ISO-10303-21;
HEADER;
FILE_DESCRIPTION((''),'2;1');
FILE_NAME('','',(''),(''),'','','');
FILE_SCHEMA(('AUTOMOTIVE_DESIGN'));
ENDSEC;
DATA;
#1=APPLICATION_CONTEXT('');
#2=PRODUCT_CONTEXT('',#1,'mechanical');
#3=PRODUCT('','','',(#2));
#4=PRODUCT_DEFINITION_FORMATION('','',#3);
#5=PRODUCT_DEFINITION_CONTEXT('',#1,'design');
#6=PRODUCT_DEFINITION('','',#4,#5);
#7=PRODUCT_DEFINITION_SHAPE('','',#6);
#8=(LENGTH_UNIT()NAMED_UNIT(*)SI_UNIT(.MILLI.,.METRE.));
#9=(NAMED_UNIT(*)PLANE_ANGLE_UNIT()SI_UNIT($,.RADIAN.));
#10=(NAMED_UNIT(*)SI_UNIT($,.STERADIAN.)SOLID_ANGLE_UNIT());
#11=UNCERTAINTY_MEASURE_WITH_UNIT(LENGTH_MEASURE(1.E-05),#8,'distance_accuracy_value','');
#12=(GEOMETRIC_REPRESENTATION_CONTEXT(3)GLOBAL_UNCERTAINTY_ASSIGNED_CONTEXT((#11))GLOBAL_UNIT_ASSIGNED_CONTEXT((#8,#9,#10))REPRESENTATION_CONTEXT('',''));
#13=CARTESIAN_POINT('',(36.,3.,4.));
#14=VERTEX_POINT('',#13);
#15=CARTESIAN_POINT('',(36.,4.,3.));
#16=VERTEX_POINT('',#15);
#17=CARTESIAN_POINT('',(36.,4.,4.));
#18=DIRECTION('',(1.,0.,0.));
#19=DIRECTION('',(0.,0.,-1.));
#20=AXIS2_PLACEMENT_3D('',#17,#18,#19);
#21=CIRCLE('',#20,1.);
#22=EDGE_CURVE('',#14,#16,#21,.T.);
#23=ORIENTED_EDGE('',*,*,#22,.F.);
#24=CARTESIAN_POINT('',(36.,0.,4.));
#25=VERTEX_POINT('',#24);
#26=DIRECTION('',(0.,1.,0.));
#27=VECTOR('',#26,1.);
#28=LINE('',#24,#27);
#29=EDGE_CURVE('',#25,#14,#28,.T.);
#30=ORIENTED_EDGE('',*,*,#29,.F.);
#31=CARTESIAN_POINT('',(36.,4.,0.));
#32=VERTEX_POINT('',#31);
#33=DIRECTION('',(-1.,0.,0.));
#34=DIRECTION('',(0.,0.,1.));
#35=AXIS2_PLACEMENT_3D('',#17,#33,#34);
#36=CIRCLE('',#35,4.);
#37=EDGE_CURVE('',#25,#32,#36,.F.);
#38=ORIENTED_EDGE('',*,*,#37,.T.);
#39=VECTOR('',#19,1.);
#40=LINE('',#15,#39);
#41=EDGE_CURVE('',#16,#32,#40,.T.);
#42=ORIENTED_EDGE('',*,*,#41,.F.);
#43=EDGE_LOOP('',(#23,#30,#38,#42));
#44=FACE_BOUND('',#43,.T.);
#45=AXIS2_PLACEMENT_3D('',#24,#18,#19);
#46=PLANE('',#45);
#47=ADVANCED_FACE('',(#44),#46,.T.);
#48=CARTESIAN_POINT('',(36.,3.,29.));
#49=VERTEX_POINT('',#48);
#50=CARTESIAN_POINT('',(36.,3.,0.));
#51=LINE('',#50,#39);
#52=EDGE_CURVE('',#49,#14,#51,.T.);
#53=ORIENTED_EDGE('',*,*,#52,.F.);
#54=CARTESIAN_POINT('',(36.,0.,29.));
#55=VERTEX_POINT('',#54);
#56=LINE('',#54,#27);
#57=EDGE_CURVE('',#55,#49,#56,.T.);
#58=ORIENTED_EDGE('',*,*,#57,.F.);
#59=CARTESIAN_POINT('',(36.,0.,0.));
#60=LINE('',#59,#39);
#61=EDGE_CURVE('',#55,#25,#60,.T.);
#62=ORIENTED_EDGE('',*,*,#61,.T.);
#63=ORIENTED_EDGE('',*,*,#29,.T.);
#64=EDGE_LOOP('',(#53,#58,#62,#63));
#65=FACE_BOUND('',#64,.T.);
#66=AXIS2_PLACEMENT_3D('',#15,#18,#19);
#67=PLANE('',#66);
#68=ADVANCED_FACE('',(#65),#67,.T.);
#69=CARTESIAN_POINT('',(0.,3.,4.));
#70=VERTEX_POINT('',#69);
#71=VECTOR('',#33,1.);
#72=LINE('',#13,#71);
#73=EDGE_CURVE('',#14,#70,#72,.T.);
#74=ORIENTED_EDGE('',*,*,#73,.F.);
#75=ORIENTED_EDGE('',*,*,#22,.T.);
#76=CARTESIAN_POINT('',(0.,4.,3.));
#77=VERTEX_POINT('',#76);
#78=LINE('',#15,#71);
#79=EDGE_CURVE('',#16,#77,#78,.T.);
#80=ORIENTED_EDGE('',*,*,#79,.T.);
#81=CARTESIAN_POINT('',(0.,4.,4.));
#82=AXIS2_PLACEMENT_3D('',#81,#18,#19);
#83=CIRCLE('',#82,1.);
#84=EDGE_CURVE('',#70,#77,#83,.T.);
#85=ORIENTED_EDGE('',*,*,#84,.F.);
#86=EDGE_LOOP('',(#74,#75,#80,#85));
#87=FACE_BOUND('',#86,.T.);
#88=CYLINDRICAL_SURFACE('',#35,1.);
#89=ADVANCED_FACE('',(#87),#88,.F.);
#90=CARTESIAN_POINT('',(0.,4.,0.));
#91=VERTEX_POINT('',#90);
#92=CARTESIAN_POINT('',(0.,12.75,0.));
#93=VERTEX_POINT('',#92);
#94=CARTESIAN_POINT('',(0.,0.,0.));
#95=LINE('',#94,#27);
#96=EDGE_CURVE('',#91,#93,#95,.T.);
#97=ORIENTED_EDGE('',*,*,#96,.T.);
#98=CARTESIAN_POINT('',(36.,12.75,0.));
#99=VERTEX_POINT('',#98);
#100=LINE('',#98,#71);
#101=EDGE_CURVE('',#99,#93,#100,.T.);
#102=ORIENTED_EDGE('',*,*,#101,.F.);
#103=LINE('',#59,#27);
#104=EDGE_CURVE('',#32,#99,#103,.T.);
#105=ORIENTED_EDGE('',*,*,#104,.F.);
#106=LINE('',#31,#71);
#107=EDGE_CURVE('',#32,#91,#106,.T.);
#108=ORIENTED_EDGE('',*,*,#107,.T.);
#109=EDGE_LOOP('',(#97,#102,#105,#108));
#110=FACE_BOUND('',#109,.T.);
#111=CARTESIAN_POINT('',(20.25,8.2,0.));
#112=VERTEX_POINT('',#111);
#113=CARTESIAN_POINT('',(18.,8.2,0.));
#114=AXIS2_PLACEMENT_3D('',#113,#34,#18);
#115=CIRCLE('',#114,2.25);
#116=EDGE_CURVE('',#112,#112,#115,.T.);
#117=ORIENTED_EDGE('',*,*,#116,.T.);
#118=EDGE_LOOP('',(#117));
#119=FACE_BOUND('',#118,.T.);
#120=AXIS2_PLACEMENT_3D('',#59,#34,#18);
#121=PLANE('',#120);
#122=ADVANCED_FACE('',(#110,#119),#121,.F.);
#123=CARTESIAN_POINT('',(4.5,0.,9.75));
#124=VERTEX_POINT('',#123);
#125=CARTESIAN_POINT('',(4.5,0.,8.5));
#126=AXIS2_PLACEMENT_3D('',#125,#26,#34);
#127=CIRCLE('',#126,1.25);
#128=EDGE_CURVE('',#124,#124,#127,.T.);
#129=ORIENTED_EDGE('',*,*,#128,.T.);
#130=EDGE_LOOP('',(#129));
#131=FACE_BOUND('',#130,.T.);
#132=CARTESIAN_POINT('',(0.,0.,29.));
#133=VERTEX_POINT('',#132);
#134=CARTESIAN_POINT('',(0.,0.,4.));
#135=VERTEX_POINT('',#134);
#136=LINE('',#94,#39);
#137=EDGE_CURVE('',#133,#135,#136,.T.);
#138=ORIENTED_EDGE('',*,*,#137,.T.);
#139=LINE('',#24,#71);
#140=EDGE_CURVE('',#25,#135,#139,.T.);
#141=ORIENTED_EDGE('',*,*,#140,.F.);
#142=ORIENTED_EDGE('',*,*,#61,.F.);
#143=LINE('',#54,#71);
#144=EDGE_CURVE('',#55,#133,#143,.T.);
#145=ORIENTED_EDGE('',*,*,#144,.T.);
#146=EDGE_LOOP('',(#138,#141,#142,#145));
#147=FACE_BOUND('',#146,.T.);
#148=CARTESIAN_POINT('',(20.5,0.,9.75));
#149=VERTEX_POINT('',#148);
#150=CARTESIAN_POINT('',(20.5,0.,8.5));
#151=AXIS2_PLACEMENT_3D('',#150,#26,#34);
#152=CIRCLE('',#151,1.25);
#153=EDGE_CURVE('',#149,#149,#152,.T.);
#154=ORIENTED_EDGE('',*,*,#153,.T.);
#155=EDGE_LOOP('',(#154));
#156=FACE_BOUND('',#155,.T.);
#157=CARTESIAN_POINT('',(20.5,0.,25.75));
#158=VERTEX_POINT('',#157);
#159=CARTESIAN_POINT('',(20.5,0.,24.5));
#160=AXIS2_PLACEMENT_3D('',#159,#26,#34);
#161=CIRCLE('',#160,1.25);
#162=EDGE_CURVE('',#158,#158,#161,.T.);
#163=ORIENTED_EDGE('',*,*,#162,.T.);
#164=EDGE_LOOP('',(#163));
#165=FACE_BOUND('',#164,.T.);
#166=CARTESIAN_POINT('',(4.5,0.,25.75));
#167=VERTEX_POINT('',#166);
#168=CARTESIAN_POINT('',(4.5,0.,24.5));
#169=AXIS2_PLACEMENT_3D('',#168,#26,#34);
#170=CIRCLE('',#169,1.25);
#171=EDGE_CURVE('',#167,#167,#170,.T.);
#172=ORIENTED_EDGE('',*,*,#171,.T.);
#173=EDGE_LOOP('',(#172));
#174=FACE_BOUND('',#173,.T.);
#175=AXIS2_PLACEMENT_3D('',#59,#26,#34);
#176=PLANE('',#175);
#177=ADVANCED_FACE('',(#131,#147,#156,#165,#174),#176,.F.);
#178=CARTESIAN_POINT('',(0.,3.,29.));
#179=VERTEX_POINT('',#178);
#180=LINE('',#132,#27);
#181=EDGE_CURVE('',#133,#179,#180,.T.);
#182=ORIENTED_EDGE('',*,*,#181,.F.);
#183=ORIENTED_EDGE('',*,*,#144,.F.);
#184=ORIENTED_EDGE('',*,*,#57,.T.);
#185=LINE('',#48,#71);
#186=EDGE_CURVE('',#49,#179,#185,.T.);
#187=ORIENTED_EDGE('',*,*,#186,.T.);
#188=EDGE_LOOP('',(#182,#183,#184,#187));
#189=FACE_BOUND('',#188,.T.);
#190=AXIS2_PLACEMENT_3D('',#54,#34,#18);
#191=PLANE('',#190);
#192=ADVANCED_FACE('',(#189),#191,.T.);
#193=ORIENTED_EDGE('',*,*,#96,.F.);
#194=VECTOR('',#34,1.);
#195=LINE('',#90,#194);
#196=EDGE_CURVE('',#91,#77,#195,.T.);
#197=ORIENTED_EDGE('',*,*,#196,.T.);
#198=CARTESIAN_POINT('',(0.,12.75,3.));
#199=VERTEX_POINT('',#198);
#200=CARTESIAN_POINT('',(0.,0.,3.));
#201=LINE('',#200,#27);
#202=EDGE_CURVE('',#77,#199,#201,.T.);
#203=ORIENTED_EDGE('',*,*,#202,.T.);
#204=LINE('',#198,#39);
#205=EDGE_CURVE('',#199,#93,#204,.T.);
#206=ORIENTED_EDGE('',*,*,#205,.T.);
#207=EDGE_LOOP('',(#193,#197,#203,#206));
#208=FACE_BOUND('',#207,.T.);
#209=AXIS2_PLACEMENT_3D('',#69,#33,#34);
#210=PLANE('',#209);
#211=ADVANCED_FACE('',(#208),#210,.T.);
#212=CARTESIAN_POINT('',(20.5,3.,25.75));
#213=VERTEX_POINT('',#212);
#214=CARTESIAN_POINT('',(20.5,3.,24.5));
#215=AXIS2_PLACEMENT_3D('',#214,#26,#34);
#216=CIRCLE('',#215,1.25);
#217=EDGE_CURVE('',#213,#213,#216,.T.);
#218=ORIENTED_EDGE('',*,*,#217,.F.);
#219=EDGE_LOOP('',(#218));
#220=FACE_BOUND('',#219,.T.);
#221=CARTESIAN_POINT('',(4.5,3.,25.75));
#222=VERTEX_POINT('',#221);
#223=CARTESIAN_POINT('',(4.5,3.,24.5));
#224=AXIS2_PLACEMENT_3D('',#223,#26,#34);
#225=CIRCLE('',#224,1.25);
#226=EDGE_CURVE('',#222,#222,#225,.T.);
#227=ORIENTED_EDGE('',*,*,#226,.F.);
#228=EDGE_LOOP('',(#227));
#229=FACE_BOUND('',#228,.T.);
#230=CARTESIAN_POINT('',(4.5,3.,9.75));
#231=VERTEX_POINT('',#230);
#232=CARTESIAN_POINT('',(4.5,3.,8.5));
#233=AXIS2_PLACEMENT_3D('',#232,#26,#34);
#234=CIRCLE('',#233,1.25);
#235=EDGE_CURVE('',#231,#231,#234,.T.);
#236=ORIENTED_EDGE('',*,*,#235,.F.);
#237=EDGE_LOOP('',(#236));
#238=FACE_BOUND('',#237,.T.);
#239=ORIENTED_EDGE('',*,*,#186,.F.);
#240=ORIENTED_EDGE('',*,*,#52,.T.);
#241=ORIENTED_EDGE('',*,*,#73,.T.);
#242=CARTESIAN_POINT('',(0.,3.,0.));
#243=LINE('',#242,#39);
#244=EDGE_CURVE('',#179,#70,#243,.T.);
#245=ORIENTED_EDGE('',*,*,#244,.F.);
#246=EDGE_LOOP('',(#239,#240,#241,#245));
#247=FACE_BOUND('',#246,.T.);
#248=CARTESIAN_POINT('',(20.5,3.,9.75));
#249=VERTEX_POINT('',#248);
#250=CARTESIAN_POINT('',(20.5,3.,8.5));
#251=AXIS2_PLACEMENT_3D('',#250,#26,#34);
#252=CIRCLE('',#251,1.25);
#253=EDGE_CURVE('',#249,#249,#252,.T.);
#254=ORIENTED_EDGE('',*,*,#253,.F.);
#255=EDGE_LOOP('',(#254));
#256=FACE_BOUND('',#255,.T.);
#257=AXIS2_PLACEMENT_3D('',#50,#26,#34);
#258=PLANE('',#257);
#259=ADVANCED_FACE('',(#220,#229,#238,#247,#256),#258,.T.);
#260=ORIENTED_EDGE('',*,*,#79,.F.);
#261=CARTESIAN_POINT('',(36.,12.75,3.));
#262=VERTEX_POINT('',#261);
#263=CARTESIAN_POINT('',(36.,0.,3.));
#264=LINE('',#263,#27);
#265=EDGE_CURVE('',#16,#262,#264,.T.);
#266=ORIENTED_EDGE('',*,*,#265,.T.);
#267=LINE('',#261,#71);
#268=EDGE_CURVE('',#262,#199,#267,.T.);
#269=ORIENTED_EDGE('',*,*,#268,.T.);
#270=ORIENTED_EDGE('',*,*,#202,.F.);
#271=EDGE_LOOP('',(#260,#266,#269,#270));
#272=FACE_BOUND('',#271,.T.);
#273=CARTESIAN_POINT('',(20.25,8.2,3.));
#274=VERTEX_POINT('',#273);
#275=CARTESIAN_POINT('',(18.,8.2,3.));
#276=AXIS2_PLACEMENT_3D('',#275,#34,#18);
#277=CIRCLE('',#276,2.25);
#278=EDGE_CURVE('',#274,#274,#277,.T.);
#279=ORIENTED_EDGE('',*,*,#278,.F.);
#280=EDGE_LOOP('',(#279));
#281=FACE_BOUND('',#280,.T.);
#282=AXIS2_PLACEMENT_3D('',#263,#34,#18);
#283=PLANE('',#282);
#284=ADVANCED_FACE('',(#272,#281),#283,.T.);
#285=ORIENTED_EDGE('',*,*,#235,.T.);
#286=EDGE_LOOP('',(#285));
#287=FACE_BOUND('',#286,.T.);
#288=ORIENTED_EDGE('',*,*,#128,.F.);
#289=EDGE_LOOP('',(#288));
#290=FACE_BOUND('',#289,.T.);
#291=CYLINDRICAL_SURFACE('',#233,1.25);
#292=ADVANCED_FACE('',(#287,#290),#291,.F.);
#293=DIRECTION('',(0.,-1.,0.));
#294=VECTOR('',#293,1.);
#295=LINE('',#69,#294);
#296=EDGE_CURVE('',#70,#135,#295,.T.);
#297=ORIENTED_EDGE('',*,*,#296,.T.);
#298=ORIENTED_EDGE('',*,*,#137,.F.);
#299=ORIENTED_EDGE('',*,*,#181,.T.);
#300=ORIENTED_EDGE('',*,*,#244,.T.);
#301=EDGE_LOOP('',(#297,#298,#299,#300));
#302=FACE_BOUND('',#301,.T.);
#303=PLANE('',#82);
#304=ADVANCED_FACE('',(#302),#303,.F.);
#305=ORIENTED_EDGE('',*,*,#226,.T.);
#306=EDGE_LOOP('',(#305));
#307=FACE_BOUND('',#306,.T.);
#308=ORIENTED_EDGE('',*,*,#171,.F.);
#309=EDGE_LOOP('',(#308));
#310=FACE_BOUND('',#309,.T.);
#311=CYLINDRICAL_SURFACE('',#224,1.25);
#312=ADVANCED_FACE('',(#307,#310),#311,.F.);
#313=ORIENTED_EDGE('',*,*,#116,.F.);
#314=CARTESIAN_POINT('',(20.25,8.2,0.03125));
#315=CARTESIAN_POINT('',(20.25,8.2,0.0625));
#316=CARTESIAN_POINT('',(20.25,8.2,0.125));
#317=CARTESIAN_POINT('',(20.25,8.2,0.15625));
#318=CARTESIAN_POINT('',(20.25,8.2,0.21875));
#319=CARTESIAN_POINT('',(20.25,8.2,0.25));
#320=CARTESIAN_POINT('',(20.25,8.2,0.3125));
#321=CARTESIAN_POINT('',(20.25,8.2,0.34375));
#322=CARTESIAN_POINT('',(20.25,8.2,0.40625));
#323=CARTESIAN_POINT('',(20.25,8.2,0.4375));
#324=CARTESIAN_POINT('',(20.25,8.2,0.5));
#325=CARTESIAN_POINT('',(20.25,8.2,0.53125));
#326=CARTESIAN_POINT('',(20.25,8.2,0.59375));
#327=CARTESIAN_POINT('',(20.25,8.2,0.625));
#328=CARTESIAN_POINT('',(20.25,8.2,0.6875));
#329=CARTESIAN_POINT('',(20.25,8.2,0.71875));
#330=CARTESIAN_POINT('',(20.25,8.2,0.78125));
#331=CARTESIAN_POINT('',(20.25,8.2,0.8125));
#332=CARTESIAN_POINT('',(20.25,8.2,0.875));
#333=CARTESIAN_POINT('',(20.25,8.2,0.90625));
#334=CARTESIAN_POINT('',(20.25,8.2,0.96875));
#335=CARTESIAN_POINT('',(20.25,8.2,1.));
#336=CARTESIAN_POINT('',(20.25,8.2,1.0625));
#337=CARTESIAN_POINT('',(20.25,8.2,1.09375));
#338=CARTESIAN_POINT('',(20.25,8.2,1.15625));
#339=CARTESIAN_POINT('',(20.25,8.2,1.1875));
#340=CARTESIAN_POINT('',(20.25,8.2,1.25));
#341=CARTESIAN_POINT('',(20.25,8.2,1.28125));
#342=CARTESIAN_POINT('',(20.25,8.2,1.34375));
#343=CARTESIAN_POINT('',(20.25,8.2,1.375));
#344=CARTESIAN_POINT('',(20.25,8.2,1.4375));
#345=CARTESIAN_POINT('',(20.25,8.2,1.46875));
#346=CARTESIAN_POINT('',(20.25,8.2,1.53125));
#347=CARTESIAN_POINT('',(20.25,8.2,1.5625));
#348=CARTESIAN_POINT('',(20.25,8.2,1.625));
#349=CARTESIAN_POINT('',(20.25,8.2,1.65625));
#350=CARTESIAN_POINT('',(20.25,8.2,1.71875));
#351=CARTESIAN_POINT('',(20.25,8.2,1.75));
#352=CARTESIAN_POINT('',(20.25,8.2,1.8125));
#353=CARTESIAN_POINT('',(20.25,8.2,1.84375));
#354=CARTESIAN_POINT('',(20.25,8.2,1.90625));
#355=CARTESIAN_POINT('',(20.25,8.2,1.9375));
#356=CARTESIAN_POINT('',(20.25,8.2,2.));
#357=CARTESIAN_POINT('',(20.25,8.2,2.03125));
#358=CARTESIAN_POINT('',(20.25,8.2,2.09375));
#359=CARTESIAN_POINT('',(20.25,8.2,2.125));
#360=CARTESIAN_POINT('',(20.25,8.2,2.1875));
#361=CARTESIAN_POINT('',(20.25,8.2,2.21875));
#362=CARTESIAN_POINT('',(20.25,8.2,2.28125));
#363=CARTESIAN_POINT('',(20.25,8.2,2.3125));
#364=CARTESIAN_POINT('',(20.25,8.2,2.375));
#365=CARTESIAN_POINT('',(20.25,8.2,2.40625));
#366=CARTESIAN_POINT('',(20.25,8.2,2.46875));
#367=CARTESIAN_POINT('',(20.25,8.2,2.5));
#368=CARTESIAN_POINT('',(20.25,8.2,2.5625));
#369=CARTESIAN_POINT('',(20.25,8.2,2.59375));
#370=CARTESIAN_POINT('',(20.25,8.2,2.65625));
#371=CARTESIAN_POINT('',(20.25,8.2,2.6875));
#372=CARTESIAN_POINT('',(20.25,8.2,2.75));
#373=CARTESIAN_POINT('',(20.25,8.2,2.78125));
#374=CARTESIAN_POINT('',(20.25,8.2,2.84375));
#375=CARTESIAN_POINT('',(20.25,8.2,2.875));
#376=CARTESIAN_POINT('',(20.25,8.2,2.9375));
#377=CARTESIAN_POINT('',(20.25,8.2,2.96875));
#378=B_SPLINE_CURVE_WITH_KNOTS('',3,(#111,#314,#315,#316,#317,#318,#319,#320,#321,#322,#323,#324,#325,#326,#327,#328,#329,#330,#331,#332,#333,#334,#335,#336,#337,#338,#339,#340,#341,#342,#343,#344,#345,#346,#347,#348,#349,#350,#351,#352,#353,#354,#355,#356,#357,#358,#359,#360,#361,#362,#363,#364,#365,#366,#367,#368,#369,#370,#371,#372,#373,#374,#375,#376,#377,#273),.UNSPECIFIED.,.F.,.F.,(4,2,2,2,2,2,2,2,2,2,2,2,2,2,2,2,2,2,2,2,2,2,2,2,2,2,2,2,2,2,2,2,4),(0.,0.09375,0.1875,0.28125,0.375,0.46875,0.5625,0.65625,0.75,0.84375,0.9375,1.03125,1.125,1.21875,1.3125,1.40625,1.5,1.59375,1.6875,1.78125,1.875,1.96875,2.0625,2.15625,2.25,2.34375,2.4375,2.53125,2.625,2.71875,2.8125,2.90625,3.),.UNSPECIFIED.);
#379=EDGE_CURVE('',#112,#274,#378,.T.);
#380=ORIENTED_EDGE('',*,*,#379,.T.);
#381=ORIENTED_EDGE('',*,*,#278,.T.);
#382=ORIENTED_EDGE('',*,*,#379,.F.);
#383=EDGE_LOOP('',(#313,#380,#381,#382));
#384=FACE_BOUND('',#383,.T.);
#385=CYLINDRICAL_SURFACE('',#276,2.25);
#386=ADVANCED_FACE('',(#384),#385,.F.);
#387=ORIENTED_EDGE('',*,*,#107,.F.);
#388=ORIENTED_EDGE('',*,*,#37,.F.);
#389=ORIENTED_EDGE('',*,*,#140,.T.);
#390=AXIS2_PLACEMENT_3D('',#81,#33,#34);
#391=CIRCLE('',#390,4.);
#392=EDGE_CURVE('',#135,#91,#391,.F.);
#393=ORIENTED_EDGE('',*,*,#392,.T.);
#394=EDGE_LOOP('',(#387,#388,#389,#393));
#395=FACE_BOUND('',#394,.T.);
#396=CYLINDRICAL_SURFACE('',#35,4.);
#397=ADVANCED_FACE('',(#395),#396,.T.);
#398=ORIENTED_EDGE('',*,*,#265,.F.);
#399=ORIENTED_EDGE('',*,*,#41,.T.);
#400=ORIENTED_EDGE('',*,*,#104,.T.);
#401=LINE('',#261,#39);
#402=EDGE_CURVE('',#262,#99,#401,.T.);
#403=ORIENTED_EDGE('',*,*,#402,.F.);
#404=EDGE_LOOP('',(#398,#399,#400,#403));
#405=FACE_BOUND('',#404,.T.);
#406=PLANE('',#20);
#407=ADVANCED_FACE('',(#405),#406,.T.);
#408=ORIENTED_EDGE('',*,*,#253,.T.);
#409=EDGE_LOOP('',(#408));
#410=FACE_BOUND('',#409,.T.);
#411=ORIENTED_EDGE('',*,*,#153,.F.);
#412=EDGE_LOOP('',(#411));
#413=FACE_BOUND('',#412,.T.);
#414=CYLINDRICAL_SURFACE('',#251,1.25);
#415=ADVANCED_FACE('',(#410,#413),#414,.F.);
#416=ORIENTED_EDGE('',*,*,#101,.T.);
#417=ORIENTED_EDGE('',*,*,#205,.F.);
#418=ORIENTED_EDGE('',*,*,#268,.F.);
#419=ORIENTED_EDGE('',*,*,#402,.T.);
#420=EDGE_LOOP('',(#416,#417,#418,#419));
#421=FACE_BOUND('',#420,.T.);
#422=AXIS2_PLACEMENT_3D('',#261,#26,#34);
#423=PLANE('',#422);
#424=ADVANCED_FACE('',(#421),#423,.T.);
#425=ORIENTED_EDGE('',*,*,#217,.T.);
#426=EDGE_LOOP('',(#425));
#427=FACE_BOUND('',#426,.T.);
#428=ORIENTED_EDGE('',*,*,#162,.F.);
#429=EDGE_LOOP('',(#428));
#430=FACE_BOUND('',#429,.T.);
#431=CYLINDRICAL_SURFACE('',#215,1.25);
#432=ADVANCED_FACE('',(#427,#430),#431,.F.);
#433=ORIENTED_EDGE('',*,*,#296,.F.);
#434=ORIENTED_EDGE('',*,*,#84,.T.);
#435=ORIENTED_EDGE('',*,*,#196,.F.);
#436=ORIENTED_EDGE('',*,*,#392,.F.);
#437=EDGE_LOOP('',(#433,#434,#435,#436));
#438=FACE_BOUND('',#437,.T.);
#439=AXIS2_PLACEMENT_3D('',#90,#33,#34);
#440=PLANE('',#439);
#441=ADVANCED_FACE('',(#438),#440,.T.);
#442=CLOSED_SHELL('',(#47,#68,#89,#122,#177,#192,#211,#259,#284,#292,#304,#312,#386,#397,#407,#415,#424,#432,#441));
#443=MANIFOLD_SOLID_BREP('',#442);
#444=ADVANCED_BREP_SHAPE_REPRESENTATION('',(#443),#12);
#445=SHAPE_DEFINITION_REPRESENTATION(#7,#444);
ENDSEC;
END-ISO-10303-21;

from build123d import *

# Parameters (mm, degrees)
T_LE_DE_BASE_PLI_E1_DEPTH = 36
TROU_TARAUD_M31_D         = 2.5
D_GAGEMENT_M41_D          = 4.5


# Sheet-metal steps are written as plain solids
with BuildPart() as part:
    # Tôle de base pliée1: sheet metal written as solids
    # Esquisse1 → Tôle de base pliée1 (new body)
    with BuildSketch(Plane(origin=(0, 0, 0), x_dir=(0, 0, -1), z_dir=(1, 0, 0))):
        with BuildLine():
            Line((0, 12.75), (0, 4))
            ThreePointArc((0, 4), (-1.171572875, 1.171572875), (-4, 0))
            Line((-4, 0), (-29, 0))
            Line((-29, 0), (-29, 3))
            Line((-29, 3), (-4, 3))
            ThreePointArc((-4, 3), (-3.292893219, 3.292893219), (-3, 4))
            Line((-3, 4), (-3, 12.75))
            Line((-3, 12.75), (0, 12.75))
        make_face()
    extrude(amount=T_LE_DE_BASE_PLI_E1_DEPTH)

    # Trou taraudé M31 (through all)
    with Locations(Plane(origin=(0, 3, 0), x_dir=(1, 0, 0), z_dir=(0, 1, 0))):
        with Locations((4.5, -24.5), (4.5, -8.5), (20.5, -8.5), (20.5, -24.5)):
            Hole(TROU_TARAUD_M31_D / 2)

    # Dégagement M41 (through all)
    with Locations(Plane.XY.offset(3)):
        with Locations((18, 8.2)):
            Hole(D_GAGEMENT_M41_D / 2)


solid = part.part
